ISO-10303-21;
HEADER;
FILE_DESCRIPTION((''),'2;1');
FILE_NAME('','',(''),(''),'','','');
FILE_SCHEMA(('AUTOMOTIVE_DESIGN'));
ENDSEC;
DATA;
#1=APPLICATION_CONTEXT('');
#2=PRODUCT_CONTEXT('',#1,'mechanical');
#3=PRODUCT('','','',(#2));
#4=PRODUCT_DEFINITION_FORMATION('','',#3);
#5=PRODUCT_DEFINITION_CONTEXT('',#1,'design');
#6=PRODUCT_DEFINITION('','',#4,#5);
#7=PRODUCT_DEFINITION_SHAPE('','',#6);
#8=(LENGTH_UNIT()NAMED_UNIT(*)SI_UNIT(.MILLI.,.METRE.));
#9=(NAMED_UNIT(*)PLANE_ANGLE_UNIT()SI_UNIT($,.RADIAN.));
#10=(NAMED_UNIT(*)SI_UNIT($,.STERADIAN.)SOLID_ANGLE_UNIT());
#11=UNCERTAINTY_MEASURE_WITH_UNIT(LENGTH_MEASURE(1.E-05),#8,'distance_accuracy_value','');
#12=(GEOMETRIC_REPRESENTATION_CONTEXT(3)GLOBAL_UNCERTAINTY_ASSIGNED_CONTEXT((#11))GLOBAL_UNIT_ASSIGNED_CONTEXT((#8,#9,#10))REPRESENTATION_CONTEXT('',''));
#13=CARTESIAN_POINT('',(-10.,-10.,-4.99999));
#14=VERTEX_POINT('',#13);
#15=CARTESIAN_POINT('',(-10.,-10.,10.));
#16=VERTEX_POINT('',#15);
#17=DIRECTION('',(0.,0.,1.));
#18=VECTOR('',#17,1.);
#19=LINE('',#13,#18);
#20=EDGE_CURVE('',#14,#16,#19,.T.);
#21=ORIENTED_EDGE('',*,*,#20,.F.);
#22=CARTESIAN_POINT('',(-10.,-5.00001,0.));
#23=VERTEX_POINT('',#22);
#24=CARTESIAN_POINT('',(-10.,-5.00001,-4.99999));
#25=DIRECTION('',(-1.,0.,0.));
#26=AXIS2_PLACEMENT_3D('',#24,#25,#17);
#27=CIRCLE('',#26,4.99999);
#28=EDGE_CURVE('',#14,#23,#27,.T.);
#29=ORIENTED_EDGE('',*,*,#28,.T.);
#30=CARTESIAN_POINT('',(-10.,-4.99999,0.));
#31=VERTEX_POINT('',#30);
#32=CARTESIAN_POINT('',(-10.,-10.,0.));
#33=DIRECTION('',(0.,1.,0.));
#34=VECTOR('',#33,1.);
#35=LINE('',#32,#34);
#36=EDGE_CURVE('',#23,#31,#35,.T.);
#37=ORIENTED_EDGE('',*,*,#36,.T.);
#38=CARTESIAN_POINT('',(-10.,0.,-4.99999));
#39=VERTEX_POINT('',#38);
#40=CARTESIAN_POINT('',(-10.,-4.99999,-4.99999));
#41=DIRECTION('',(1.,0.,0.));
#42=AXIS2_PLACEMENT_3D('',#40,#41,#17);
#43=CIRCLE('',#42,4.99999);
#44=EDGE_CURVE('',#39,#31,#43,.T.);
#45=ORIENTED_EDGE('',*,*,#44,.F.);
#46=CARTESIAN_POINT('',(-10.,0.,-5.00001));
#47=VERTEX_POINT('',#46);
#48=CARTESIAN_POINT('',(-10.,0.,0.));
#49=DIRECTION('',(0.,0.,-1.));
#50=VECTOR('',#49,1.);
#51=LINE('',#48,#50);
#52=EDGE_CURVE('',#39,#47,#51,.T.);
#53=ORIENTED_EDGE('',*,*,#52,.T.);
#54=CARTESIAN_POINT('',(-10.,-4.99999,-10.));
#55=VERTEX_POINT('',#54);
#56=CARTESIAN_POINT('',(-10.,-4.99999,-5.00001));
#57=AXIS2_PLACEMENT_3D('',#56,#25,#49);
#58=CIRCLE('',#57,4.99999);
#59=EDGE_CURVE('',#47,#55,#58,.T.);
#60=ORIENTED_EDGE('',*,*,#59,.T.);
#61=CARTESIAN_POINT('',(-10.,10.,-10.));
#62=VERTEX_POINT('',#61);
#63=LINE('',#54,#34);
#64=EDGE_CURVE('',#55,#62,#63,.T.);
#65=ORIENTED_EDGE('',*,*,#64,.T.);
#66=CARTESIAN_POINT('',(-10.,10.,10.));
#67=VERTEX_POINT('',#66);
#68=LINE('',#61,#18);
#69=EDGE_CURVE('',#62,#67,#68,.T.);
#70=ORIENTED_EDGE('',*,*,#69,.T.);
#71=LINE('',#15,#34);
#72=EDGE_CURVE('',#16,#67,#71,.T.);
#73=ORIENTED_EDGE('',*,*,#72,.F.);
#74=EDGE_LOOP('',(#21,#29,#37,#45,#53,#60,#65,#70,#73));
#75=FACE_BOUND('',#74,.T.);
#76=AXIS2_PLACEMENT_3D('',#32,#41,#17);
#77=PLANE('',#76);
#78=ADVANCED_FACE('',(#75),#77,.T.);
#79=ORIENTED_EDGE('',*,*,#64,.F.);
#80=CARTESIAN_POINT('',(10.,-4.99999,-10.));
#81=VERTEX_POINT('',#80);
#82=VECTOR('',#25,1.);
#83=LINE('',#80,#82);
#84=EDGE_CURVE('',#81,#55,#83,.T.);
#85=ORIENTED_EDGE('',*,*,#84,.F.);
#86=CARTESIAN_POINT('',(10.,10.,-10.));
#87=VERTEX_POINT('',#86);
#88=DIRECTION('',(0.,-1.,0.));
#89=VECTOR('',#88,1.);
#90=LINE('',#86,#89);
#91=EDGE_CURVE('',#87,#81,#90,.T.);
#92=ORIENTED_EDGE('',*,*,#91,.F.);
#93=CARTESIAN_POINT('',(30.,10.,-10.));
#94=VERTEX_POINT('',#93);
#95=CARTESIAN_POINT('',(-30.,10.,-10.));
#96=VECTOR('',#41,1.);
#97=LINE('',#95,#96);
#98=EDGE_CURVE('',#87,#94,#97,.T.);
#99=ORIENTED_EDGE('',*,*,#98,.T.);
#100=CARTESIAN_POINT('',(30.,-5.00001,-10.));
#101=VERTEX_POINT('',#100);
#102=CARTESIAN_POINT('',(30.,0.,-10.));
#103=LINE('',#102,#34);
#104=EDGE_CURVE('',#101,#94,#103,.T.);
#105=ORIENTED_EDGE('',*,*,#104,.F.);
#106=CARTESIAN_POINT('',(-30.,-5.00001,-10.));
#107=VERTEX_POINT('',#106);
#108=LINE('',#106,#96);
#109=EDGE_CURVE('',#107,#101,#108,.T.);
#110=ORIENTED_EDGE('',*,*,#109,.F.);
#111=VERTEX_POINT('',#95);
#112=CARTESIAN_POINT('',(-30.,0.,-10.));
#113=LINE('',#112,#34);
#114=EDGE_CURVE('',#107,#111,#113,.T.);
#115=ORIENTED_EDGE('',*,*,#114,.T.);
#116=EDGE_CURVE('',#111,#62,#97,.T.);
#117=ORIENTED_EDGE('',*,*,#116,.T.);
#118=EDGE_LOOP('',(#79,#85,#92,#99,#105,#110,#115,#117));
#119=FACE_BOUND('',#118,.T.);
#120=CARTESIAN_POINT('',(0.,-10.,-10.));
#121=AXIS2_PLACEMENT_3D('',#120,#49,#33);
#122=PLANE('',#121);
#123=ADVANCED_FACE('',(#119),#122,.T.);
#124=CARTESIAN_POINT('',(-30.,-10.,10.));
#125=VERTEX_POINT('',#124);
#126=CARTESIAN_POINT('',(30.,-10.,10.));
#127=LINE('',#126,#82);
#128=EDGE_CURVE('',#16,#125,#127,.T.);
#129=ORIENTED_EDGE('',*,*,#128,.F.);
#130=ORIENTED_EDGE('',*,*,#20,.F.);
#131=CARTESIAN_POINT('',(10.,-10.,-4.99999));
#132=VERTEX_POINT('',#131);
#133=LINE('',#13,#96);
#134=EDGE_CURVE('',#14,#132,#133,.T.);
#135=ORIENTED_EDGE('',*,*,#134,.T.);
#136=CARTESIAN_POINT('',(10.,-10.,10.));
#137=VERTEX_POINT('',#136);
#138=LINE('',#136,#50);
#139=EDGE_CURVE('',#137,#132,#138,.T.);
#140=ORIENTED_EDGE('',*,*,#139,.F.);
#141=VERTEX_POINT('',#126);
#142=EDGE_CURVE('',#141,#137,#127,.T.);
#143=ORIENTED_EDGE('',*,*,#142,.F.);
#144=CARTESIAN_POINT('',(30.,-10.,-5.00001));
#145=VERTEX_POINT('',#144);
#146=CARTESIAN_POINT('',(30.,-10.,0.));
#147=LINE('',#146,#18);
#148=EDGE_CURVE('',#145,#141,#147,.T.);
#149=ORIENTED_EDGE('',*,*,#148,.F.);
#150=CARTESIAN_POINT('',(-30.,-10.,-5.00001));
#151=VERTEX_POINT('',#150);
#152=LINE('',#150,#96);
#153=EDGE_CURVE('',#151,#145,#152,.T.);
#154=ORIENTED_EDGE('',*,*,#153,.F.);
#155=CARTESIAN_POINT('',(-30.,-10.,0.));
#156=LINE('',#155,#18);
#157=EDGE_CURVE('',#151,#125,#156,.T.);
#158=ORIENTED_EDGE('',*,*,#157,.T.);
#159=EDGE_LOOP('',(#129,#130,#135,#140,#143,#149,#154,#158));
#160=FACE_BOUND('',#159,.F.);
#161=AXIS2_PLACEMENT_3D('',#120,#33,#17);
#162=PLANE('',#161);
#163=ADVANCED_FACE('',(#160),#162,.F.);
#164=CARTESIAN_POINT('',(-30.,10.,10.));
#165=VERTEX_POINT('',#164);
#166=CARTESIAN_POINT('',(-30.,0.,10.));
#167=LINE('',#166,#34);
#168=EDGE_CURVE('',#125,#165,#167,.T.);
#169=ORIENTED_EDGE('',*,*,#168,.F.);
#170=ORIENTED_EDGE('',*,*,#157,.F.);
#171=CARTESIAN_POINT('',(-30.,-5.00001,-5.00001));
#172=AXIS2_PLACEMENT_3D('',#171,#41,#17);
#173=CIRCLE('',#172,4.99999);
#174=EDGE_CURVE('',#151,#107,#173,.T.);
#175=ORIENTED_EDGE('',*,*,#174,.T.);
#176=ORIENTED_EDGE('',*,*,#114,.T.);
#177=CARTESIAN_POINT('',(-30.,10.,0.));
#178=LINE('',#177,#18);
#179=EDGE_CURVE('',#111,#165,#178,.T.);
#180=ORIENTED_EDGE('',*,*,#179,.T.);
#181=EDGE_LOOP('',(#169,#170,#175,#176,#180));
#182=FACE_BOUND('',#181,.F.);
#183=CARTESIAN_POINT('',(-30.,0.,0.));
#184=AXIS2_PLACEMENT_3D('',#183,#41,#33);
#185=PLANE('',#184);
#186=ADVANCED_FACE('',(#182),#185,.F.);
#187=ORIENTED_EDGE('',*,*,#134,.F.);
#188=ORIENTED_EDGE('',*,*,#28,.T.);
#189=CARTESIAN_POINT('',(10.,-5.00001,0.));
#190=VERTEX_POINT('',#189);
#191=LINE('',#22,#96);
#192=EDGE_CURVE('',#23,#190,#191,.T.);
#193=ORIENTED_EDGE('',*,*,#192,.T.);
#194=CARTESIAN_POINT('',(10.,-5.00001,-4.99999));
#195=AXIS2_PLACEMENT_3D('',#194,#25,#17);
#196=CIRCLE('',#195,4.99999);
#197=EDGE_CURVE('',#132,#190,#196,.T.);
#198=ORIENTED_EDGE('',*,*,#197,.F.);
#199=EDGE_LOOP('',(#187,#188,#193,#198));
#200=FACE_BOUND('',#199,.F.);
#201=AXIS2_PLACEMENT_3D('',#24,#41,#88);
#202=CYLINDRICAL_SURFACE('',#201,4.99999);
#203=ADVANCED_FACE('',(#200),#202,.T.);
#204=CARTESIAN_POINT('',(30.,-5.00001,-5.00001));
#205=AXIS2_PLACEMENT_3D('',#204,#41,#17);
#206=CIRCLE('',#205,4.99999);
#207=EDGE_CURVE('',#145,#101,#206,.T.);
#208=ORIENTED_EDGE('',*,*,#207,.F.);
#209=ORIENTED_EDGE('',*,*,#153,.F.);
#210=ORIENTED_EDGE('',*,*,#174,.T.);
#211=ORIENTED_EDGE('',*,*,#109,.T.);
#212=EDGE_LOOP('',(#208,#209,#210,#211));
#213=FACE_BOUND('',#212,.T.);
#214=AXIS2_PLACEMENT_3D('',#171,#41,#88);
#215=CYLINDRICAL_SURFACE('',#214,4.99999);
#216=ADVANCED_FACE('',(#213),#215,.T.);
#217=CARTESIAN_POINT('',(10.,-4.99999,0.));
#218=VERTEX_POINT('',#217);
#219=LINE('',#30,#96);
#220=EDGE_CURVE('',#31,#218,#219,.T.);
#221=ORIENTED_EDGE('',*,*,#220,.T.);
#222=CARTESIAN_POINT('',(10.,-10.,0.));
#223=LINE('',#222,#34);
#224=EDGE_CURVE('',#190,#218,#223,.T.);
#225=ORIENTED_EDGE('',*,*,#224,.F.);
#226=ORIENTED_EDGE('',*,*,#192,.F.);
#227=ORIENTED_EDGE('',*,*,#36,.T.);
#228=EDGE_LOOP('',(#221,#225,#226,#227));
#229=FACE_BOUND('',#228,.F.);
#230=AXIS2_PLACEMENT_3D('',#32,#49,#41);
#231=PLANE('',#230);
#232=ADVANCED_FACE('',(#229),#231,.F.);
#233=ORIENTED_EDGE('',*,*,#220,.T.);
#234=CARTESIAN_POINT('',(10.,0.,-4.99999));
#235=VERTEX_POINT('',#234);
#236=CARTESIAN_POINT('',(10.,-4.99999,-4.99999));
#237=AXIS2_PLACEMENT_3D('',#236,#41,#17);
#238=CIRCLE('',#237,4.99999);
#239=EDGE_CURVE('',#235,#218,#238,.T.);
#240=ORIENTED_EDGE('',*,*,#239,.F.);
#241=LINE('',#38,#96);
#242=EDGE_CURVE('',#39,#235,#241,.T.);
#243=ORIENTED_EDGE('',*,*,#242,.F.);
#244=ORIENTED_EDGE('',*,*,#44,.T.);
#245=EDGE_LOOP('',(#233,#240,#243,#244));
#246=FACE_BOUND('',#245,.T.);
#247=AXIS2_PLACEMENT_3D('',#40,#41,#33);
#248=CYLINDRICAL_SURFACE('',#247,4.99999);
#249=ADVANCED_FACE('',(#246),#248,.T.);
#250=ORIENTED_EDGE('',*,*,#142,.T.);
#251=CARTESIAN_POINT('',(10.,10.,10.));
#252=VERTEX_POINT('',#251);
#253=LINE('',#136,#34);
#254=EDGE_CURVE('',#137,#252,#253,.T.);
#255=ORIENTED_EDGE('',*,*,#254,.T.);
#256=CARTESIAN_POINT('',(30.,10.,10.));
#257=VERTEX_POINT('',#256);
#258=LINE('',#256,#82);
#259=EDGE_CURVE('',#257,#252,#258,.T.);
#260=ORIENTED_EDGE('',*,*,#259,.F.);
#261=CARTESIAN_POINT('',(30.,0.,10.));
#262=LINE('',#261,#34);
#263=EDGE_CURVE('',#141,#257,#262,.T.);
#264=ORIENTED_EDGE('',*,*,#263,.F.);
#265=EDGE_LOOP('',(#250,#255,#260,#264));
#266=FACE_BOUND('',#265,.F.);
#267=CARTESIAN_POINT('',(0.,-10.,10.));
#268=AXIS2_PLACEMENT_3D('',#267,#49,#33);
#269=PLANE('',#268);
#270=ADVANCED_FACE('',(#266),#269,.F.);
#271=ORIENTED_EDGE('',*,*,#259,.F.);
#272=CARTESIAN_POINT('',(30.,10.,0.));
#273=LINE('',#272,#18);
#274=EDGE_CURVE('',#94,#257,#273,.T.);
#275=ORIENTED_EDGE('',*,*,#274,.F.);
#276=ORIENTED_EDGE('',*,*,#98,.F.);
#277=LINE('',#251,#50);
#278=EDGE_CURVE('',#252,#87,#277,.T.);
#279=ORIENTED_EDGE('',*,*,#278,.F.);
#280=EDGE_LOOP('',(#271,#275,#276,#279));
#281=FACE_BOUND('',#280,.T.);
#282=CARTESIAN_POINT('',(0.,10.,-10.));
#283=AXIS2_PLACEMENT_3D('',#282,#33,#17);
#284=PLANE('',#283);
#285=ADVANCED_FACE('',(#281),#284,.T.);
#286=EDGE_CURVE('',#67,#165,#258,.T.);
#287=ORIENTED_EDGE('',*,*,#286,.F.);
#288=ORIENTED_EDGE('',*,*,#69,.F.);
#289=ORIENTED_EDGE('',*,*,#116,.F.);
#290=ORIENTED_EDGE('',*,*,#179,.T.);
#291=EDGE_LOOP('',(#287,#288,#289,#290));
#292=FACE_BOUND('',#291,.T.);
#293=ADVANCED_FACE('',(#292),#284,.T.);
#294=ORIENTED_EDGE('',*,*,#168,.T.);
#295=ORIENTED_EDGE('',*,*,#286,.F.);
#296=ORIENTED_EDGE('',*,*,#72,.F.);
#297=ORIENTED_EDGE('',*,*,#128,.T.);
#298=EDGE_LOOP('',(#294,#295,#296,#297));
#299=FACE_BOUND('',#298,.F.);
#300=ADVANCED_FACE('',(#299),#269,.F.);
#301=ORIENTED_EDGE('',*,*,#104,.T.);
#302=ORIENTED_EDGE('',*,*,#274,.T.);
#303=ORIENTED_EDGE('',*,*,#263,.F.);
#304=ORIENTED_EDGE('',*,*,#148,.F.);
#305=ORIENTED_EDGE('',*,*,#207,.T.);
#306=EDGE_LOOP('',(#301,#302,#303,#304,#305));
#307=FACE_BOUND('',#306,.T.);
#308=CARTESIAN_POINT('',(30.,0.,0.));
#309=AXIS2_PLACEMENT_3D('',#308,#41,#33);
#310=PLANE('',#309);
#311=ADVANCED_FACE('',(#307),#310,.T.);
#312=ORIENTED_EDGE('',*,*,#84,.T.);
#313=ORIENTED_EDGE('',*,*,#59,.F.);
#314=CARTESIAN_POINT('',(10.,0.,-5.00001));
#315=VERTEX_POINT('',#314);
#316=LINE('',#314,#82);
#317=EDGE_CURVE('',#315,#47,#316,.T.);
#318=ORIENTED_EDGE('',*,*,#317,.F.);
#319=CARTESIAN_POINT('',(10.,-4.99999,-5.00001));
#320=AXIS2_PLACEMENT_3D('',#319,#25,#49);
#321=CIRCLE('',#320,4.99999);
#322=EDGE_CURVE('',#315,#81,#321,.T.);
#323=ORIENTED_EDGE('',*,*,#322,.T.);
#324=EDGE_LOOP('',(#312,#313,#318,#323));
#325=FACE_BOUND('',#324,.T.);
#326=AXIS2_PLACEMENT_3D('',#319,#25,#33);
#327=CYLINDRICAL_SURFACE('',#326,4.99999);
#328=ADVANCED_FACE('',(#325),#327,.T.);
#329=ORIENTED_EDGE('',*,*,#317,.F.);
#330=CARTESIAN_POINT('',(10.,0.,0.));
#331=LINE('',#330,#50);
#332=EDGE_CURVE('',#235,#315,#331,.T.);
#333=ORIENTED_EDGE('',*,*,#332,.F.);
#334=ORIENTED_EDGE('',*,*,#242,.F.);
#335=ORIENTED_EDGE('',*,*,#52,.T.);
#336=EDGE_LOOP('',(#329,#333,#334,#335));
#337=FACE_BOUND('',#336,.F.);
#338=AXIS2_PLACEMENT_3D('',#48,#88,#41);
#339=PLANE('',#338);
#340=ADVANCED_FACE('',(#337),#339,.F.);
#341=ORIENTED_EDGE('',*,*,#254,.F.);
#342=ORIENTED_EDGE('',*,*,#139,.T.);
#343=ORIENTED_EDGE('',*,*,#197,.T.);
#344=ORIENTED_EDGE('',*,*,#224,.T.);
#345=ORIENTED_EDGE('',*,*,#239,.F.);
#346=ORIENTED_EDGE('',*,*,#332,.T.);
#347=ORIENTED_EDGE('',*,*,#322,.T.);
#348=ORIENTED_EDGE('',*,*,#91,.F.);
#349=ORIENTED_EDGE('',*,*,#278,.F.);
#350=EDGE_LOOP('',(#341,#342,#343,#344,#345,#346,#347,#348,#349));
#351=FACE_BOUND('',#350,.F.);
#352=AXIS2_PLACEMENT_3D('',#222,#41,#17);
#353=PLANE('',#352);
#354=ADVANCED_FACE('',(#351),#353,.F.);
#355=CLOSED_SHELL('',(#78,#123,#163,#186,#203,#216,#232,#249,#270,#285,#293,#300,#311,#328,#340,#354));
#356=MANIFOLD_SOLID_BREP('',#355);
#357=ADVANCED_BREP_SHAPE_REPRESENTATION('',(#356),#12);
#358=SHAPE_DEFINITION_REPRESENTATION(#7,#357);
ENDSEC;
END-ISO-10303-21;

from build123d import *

# Parameters (mm, degrees)
F0_W     = 20
F0_H     = 20
F1_DEPTH = 30
F2_W     = 20
F2_H     = 10
F3_DEPTH = 20
F4_W     = 20
F4_H     = 10
F5_DEPTH = 25
F6_R     = 4.99999


# Not quite as in the source:
# - a fillet or chamfer is up to 0.001 mm smaller than in the source, because OpenCascade refuses the exact size


with BuildPart() as f1:
    # F0 (on Right) → F1 (new body, symmetric)
    with BuildSketch(Plane.YZ):
        Rectangle(F0_W, F0_H)
    extrude(amount=F1_DEPTH, both=True)

    # F2 (on face) → F3 (cut)
    with BuildSketch(Plane.XZ.offset(10)):
        with Locations((0, 5)):
            Rectangle(F2_W, F2_H)
    extrude(amount=-F3_DEPTH, mode=Mode.SUBTRACT)

    # F4 (on face) → F5 (cut)
    with BuildSketch(Plane.XY):
        with Locations((0, 5)):
            Rectangle(F4_W, F4_H)
    extrude(amount=-F5_DEPTH, mode=Mode.SUBTRACT)

    # F6 (radius 5 in the source; OpenCascade refuses exactly that, so slightly less here)
    f6_edges = [f1.edges().sort_by_distance(p)[0] for p in [
        (0, 0, 0),
        (0, 0, -10),
        (0, -10, 0),
        (0, -10, -10),
    ]]
    fillet(f6_edges, radius=F6_R)


solid = f1.part
